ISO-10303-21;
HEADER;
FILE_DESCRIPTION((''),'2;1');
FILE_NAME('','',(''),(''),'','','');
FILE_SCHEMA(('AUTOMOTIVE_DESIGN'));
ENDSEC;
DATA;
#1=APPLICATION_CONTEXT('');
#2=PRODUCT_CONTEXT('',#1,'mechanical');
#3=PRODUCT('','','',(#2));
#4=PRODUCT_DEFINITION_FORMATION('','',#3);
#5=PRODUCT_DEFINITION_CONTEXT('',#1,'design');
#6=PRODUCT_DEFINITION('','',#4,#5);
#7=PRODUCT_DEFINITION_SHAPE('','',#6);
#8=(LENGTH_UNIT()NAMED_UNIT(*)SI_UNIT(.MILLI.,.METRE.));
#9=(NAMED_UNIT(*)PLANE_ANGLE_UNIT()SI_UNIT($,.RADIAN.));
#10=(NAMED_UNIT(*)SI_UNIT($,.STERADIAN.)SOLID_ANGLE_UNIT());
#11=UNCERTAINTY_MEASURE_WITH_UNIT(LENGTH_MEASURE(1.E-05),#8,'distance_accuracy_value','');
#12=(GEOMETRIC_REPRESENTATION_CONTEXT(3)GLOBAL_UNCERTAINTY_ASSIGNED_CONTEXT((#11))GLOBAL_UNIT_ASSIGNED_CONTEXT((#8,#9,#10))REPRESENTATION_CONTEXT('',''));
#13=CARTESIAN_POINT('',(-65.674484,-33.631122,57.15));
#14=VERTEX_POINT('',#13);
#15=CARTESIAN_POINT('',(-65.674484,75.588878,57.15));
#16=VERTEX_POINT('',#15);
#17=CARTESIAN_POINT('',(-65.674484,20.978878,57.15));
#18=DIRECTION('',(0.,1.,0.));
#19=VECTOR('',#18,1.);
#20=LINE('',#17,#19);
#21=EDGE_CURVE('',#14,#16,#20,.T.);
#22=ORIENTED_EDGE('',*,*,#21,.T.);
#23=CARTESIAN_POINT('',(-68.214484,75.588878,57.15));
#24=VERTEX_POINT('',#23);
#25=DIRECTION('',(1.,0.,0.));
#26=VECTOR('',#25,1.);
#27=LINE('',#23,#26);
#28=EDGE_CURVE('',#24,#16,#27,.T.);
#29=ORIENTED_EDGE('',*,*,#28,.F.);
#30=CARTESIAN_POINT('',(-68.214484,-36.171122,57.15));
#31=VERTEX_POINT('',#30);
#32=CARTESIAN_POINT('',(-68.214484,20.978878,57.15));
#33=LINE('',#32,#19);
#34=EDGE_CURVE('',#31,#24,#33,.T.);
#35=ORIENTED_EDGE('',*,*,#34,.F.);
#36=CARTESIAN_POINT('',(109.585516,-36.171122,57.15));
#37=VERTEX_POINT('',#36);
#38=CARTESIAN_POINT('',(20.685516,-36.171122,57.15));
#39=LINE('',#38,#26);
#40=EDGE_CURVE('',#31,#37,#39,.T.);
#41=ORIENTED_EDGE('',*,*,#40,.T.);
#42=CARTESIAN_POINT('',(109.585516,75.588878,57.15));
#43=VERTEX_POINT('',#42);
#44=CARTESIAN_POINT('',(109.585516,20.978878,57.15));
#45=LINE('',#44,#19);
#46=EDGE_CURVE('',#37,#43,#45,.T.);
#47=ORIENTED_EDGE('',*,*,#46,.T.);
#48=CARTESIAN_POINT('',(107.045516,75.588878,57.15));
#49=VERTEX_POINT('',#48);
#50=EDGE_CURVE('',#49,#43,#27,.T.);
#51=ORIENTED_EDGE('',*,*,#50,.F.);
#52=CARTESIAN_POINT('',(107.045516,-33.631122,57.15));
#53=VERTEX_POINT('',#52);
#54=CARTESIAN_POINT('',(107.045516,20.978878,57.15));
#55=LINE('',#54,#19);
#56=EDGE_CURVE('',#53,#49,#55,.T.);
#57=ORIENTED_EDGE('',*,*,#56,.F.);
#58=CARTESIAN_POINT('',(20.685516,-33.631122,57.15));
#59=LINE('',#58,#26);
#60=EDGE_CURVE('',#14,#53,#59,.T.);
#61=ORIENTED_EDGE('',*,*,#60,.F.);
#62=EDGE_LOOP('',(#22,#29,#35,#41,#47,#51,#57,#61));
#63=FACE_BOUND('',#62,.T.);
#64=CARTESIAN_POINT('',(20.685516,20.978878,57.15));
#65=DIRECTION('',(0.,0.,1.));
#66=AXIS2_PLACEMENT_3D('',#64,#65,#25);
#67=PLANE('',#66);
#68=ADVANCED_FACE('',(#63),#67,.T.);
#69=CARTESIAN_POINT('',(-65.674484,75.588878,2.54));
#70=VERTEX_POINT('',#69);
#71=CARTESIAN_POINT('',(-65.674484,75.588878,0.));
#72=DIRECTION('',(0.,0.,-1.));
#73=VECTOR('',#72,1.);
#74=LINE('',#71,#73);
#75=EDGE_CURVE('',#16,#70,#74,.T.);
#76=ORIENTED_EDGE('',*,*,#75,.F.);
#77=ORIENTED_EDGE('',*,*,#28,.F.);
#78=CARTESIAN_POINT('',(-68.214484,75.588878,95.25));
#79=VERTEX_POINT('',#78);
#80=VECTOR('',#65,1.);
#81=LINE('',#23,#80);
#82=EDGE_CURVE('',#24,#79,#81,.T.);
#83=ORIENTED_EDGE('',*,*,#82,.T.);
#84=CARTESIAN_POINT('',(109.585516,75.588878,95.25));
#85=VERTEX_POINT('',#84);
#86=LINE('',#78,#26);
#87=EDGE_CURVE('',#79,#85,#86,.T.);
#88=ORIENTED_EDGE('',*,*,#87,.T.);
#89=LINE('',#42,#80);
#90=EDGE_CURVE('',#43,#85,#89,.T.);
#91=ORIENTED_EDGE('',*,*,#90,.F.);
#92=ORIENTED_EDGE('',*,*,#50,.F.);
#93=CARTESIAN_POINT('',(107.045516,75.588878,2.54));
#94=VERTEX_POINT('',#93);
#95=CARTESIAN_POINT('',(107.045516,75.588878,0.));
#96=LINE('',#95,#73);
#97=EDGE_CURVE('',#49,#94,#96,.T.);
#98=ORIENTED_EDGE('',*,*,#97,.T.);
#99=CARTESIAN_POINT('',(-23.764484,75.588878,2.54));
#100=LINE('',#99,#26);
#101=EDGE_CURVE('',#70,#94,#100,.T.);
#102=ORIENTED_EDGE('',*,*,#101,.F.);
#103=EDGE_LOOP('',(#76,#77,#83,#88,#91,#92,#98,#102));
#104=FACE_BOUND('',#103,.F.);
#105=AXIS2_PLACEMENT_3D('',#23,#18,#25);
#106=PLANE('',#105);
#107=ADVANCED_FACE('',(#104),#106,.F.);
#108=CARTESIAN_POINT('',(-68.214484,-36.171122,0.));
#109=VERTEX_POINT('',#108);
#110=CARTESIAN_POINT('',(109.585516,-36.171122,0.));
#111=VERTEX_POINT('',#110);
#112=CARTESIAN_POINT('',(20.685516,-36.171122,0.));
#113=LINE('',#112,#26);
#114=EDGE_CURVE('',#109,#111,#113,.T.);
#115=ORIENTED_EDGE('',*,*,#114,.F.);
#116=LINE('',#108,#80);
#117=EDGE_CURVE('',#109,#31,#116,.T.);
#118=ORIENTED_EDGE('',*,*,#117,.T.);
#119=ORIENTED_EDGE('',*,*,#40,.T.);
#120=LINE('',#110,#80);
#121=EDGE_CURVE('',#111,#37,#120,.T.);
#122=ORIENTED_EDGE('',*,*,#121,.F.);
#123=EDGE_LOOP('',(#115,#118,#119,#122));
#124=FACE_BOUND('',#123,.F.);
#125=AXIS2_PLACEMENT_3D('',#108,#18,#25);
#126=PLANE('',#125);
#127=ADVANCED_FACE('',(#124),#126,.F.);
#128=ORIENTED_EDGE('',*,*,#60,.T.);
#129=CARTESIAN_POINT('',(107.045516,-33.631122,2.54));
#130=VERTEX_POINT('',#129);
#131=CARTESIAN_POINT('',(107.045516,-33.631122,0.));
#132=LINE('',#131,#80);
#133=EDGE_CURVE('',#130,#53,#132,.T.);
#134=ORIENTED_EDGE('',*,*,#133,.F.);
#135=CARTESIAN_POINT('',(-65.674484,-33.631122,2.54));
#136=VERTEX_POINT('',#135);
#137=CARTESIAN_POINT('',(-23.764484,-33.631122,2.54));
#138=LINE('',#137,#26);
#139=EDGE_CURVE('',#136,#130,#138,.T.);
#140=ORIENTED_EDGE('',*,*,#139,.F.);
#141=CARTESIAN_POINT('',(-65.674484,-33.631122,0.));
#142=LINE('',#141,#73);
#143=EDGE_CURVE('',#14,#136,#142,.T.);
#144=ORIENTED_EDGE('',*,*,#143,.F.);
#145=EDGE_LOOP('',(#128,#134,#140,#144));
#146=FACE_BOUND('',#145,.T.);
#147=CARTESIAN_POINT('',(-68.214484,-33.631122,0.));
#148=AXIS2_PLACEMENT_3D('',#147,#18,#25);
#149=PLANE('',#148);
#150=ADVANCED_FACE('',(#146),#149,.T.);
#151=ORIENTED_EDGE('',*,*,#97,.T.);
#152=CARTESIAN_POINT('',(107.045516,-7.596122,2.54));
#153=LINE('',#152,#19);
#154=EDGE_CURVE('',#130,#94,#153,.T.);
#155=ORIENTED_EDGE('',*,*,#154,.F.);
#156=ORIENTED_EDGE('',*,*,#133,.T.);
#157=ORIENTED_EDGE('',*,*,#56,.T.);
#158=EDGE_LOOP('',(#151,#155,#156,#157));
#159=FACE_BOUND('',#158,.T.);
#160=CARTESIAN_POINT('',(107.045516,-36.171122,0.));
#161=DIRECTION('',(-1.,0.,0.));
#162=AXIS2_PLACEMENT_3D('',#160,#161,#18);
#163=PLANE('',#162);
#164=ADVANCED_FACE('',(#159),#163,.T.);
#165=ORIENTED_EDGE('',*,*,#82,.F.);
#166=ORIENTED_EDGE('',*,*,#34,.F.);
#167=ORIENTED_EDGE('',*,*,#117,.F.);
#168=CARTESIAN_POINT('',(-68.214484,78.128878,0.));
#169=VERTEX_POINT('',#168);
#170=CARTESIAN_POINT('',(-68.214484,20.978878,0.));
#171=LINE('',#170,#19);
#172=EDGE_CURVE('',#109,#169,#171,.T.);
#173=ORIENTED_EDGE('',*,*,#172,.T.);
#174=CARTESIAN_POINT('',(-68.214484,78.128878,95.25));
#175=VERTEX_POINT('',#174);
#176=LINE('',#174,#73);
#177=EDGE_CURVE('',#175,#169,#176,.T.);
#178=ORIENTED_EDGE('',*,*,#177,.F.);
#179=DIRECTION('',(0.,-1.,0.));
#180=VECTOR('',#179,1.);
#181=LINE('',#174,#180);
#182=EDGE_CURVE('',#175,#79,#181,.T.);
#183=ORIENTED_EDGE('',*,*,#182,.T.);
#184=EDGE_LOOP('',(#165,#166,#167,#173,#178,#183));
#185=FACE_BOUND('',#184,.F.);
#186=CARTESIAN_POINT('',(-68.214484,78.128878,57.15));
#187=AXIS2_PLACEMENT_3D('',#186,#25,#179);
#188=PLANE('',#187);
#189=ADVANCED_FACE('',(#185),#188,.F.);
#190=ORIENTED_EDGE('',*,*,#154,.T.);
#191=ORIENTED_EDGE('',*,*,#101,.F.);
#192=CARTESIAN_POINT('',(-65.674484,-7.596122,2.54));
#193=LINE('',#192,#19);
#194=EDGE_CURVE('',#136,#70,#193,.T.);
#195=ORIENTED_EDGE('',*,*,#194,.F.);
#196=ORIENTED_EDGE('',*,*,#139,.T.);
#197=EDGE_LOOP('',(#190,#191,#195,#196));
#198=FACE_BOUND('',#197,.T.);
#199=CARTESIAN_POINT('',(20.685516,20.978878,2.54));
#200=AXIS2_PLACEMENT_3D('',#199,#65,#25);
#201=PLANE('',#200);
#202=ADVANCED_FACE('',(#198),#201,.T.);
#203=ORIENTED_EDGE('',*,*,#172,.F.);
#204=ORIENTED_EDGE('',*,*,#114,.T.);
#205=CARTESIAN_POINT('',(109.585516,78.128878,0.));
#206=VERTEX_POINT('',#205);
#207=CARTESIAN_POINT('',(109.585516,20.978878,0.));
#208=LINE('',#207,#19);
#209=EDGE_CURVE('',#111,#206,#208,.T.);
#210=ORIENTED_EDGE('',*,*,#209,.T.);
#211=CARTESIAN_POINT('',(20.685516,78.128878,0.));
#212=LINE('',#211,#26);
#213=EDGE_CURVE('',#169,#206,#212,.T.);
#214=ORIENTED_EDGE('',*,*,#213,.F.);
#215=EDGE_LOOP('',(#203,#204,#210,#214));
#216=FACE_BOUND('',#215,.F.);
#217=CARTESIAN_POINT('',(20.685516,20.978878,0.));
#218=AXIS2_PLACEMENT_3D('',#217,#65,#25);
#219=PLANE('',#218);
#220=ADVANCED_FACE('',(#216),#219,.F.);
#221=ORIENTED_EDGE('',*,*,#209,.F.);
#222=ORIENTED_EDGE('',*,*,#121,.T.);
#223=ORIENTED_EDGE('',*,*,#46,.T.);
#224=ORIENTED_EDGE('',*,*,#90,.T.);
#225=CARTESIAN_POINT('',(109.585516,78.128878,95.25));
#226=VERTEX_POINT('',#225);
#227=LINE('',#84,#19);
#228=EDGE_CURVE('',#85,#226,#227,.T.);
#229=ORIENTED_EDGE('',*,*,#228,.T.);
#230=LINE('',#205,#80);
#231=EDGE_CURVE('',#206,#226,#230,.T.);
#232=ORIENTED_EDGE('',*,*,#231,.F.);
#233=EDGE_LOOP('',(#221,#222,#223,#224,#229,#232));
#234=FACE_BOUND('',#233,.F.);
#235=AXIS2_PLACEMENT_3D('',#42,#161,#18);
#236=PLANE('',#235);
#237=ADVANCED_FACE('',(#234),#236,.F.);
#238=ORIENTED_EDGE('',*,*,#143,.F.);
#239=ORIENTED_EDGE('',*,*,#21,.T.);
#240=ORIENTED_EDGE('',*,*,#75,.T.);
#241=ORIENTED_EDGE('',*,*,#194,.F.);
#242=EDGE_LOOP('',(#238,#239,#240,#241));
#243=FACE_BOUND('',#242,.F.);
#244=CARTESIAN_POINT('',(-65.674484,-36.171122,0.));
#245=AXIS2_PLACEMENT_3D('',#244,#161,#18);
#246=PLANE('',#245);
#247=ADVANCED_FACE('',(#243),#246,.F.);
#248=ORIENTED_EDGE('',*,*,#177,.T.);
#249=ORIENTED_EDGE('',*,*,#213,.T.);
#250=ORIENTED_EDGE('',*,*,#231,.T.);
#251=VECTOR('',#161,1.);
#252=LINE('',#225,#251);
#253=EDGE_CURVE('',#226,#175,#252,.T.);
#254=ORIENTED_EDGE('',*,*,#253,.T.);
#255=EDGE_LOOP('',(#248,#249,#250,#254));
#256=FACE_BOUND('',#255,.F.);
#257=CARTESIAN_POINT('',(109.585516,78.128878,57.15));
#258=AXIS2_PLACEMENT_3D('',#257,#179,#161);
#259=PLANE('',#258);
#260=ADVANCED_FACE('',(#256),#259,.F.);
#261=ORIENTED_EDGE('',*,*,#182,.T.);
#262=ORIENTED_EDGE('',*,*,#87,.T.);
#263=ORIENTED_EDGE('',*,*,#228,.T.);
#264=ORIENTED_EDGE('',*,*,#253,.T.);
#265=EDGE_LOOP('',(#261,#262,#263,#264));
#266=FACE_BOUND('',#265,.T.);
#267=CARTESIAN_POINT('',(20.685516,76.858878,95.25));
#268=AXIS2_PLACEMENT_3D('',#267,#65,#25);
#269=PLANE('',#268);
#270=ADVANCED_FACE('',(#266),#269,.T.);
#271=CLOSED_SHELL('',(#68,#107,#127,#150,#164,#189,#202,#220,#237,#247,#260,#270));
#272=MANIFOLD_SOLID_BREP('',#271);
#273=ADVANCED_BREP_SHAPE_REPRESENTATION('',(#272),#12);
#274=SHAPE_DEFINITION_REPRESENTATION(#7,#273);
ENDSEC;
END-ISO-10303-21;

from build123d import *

# Parameters (mm, degrees)
F0_W     = 177.8
F0_H     = 114.3
F1_DEPTH = 57.15
F2_T     = -2.54
F4_DEPTH = 38.1


with BuildPart() as f1:
    # F0 (on Top) → F1 (new body)
    with BuildSketch(Plane.XY):
        with Locations((20.6855162978, 20.978878082)):
            Rectangle(F0_W, F0_H)
    extrude(amount=F1_DEPTH)

    # F2
    f2_openings = [f1.faces().sort_by_distance(p)[0] for p in [
        (20.685516, 20.978878, 57.15),
    ]]
    offset(amount=F2_T, openings=f2_openings)

    # F3 (on face) → F4 (join)
    with BuildSketch(Plane.XY.offset(57.15)):
        Polygon((-68.2144837022, 75.588878082), (-65.6744837022, 75.588878082), (107.0455162978, 75.588878082), (109.5855162978, 75.588878082), (109.5855162978, 78.128878082), (-68.2144837022, 78.128878082), align=None)
    extrude(amount=F4_DEPTH)


solid = f1.part
